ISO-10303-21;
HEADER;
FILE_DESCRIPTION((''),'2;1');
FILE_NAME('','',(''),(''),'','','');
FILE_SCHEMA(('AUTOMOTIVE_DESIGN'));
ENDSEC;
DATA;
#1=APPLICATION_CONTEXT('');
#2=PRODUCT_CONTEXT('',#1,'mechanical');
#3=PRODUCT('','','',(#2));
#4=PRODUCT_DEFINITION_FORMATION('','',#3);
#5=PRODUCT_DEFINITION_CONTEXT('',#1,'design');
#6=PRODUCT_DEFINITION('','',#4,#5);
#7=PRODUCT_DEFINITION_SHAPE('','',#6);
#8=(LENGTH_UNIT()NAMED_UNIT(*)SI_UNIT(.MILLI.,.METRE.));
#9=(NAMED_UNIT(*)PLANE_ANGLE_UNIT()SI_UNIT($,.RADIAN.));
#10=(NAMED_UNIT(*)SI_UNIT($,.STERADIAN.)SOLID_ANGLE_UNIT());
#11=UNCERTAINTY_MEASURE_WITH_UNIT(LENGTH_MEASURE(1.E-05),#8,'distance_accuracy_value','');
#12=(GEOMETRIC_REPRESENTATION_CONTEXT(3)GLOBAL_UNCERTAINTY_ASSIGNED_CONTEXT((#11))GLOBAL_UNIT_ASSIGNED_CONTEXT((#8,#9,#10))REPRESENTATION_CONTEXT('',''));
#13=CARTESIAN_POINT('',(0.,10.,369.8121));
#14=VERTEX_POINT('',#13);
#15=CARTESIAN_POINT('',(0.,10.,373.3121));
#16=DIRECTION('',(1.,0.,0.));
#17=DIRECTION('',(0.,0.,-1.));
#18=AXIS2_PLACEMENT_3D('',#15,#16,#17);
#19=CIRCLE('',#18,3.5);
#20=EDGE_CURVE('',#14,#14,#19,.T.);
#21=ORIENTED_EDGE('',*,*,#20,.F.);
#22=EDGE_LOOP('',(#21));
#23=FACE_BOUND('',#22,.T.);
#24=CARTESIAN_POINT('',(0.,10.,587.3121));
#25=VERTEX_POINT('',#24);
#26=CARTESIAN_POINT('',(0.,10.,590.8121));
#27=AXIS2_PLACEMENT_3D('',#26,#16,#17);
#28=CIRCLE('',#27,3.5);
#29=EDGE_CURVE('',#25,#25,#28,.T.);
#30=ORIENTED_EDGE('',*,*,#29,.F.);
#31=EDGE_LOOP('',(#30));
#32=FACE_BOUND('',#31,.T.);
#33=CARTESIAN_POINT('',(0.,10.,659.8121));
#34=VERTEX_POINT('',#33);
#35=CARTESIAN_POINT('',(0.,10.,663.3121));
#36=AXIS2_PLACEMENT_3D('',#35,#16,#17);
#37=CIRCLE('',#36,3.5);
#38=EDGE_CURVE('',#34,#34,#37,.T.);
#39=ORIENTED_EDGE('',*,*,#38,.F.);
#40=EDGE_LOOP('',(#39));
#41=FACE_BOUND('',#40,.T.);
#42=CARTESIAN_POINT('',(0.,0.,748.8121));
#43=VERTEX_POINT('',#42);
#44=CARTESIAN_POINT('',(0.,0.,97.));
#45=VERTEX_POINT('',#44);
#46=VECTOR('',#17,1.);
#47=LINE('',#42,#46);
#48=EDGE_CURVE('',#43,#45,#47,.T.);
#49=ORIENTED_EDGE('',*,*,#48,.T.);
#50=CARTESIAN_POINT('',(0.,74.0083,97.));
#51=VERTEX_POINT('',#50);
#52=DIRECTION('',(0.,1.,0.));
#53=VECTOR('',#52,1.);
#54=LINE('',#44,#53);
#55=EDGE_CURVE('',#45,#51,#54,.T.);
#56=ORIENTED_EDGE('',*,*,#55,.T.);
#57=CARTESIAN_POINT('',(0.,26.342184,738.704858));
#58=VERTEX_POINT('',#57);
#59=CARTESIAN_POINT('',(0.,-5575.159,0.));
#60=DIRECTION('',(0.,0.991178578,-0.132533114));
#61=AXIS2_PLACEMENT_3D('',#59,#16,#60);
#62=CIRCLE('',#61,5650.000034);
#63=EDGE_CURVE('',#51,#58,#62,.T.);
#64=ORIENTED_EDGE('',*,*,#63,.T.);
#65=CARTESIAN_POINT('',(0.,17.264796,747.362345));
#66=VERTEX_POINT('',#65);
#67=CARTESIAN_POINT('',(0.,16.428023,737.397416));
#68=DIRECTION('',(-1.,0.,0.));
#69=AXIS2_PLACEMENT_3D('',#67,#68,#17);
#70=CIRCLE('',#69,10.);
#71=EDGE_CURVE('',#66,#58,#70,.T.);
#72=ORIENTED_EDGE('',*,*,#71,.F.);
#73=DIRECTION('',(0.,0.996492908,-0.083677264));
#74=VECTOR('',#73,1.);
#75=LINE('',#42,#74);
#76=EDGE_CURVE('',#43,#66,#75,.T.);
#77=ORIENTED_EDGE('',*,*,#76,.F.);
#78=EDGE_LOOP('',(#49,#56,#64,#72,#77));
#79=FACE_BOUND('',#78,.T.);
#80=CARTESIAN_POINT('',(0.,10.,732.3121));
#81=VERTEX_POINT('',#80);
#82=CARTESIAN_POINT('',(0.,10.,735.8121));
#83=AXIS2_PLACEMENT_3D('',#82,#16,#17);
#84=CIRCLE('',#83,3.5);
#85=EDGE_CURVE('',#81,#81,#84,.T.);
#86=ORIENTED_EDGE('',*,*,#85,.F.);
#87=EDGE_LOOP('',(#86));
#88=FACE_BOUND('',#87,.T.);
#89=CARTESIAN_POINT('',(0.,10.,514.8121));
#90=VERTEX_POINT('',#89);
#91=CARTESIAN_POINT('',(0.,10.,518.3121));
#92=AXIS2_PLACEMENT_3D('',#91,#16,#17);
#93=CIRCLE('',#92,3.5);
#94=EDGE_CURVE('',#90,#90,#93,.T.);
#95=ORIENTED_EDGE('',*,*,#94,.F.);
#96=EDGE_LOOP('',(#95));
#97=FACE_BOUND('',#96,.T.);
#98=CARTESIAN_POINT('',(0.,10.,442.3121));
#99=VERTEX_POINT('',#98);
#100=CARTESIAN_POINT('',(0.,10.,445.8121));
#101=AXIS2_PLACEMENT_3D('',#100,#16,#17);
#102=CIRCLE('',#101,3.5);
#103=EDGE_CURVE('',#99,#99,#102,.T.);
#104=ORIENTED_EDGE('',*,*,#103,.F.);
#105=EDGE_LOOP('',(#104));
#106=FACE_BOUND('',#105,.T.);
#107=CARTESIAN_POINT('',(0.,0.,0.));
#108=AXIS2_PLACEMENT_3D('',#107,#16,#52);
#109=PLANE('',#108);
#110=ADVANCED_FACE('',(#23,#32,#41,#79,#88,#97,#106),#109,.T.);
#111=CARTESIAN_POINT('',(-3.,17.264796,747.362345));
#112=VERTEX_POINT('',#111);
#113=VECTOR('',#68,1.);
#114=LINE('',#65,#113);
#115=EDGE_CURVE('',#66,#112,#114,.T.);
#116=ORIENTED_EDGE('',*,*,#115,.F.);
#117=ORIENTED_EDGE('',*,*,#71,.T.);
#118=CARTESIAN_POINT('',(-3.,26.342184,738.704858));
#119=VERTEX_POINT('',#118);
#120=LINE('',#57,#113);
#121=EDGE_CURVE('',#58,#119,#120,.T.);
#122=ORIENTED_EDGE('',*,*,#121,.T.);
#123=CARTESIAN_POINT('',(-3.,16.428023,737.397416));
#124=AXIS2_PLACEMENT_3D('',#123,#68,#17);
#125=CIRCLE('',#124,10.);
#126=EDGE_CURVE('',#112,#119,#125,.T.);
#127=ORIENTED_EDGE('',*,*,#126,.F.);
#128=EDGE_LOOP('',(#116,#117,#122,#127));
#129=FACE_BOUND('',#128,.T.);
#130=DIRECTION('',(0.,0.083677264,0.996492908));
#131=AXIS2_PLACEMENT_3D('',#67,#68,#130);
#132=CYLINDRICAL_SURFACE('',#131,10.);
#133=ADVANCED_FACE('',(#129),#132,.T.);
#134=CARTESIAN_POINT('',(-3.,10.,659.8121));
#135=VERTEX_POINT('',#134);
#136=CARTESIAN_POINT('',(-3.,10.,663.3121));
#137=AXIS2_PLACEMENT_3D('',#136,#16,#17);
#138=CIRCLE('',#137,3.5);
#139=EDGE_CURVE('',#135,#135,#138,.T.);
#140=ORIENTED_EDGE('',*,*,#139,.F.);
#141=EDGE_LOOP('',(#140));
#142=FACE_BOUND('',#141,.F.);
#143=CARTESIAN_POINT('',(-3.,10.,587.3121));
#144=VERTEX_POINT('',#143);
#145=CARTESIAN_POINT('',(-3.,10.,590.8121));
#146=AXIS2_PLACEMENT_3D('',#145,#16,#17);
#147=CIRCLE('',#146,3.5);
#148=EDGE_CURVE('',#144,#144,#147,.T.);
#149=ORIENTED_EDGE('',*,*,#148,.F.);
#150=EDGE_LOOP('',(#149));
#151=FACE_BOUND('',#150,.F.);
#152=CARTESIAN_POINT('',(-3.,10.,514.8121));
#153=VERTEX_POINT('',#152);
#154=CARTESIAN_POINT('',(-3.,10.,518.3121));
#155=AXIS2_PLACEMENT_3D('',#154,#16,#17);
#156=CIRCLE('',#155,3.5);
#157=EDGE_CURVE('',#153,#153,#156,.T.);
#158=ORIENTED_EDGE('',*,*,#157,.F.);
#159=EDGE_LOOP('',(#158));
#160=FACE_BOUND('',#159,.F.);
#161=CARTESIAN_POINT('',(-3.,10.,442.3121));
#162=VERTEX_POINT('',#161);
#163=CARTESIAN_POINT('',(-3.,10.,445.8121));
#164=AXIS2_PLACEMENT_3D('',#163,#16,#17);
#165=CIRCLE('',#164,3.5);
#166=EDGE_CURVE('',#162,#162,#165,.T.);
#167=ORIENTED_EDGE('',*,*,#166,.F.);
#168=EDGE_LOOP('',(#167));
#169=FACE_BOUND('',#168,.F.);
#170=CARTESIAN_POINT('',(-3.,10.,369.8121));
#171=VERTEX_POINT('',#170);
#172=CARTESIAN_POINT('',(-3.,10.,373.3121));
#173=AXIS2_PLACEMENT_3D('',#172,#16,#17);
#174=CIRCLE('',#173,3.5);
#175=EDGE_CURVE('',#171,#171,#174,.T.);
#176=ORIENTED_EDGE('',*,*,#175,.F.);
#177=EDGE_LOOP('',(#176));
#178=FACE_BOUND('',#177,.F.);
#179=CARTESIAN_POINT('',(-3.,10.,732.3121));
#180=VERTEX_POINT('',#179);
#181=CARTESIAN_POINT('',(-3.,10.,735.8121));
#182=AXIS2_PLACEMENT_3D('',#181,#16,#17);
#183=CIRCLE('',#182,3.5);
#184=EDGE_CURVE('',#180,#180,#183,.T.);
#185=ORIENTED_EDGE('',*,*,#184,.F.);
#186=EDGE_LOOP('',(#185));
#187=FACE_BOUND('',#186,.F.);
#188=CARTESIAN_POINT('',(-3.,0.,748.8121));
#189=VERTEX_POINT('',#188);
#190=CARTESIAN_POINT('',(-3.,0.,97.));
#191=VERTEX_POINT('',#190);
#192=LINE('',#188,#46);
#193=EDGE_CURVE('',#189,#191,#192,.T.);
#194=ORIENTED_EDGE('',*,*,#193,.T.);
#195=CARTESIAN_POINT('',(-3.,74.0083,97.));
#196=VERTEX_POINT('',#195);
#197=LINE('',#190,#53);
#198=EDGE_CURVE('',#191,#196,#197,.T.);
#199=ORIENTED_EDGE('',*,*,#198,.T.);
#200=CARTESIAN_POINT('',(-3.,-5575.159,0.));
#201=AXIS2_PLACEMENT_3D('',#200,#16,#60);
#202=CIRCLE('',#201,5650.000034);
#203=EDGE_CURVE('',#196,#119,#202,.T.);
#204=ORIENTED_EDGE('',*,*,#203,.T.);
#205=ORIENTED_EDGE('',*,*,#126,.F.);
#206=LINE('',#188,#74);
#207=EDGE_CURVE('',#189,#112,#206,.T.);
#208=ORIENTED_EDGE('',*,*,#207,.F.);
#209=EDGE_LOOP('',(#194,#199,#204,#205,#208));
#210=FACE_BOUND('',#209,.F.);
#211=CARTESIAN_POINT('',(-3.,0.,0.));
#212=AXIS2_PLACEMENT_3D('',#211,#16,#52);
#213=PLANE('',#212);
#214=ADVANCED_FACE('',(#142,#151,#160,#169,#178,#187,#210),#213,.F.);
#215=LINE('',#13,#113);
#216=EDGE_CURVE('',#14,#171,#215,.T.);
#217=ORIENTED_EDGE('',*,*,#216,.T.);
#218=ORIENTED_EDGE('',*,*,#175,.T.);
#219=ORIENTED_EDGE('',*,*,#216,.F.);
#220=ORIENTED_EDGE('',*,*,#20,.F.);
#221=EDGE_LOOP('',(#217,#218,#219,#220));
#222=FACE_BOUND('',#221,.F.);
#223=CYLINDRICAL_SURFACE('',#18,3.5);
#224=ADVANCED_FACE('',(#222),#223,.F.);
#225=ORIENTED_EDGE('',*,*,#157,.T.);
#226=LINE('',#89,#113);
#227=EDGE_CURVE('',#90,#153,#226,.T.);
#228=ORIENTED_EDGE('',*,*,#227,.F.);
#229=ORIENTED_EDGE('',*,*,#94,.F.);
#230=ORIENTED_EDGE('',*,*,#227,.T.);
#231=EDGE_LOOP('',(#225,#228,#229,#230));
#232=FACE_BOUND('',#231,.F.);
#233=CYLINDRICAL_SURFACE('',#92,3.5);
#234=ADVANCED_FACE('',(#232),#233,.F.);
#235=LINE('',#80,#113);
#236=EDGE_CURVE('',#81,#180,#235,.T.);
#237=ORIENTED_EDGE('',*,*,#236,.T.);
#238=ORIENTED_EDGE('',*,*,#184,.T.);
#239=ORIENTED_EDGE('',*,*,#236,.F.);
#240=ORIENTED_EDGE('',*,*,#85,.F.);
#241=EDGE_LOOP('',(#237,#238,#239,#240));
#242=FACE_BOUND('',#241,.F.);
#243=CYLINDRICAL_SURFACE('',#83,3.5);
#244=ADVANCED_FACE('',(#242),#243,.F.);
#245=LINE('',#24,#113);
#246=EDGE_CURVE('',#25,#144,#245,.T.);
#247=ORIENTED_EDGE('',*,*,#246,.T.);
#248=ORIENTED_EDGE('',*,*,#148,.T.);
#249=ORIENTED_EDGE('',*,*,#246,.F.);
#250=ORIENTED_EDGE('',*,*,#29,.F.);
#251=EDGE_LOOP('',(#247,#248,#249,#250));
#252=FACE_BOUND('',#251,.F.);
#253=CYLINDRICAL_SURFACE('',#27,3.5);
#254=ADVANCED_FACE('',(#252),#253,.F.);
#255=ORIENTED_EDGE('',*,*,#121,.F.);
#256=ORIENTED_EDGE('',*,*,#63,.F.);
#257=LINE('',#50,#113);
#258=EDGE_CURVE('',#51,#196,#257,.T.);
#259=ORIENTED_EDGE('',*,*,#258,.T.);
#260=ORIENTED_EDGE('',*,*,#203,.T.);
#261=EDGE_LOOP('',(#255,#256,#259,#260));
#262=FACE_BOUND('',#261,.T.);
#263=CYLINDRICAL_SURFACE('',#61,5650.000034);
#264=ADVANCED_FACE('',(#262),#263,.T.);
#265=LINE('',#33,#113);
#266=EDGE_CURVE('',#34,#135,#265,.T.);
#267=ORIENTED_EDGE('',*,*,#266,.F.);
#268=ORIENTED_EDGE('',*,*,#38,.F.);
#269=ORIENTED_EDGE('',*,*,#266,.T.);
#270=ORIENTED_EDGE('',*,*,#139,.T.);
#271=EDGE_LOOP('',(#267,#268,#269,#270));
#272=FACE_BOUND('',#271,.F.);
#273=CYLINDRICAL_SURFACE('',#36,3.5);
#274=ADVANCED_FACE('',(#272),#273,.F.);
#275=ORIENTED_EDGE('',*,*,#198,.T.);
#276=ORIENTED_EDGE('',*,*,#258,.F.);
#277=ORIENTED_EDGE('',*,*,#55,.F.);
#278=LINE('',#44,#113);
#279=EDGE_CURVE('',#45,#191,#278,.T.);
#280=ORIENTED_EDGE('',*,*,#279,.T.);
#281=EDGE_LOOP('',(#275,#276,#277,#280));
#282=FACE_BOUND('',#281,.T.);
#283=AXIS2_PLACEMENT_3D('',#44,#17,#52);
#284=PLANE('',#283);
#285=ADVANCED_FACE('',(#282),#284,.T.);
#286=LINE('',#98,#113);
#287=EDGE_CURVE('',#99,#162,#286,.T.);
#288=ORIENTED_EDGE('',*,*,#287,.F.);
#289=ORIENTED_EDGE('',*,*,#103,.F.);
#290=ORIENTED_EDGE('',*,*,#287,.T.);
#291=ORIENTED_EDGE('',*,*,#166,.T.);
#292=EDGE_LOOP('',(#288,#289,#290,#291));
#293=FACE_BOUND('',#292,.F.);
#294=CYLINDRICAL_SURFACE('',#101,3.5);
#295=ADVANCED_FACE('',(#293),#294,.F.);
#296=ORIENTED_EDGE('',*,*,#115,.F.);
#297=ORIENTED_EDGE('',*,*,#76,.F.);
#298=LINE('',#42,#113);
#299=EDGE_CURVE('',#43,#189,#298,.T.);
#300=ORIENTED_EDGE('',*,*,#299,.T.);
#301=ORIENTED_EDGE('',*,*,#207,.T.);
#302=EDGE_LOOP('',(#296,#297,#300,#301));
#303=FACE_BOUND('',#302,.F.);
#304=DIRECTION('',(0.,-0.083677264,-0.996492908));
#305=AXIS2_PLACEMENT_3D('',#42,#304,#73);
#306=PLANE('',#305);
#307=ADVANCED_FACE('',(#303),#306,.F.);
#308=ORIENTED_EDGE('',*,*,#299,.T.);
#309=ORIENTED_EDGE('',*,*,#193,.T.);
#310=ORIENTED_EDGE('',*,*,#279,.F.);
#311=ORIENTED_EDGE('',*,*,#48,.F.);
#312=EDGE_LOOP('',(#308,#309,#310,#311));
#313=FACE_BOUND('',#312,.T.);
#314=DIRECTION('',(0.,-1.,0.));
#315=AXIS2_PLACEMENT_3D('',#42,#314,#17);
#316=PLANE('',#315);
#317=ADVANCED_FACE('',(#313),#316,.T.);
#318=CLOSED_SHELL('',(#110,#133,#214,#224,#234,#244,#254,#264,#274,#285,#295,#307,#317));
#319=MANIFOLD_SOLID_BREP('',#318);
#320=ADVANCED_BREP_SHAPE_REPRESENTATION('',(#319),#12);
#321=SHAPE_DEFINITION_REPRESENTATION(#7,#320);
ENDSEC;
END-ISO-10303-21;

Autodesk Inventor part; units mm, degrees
ref_plane "YZ Plane" through (0, 0, 0) normal (1, 0, 0) x (0, 1, 0)
ref_plane "XZ Plane" through (0, 0, 0) normal (0, 1, 0) x (-1, 0, 0)
ref_plane "XY Plane" through (0, 0, 0) normal (0, 0, 1) x (1, 0, 0)
sketch "Sketch1" plane through (0, 0, 0) normal (1, 0, 0) x (0, 1, 0)
  line L0 (25, 748.8121) -> (0, 748.8121)
  line L1 (0, 748.8121) -> (0, -748.8121)
  line L2 (0, -748.8121) -> (25, -748.8121)
  arc A0 (25, -748.8121) -> (25, 748.8121) centre (-5575.159, 0) ccw
  line L3 (0, 748.8121) -> (25.2835, 746.689)
  line L4 (0, -748.8121) -> (25.2835, -746.689)
  line L5 (0, 97) -> (74.0083, 97)
  point P0 (0, 0)
  point P1 (0, 0)
  dimension "d2" = 25
  dimension "d3" = 5650
  dimension "d7" = 85.2
  dimension "d8" = 85.2
  dimension "d33" = 97
  dimension "d34" = 651.812
extrude "Plate1" add sketch "Sketch1" against normal blind 3 contours L3 A0 L5 L1
fillet "Corner Round3" radius 10 1 edges at (-1.5, 25.2835, 746.689)
sketch "Sketch4" plane through (0, 0, 0) normal (1, 0, 0) x (0, 0, -1)
  circle A0 centre (-735.8121, 10) radius 3.5
  line L0 (-748.8121, 0) -> (-97, 0) projected
  point P0 (0, 0)
  dimension "d23" = 7
  dimension "d25" = 10
  dimension "d32" = 13
extrude "Extrusion1" cut sketch "Sketch4" against normal through all
pattern_linear "Rectangular Pattern2" count 6 spacing 72.5 along (0, 0, -1) of "Extrusion1"
equation "\"d4\" = Thickness"
equation "\"BendReliefWidth\" = Thickness"
equation "\"BendReliefDepth\" = 0.5 * Thickness"
equation "\"CornerReliefSize\" = 4 * Thickness"
equation "\"MinimumRemnant\" = 2 * Thickness"
equation "\"TransitionRadius\" = BendRadius"
equation "\"JacobiRadiusSize\" = BendRadius"
equation "\"GapSize\" = Thickness"
equation "\"Thickness\" = 3"
equation "\"BendRadius\" = 5"
properties part number "MSC 812 top support gills" material "Stainless Steel"
